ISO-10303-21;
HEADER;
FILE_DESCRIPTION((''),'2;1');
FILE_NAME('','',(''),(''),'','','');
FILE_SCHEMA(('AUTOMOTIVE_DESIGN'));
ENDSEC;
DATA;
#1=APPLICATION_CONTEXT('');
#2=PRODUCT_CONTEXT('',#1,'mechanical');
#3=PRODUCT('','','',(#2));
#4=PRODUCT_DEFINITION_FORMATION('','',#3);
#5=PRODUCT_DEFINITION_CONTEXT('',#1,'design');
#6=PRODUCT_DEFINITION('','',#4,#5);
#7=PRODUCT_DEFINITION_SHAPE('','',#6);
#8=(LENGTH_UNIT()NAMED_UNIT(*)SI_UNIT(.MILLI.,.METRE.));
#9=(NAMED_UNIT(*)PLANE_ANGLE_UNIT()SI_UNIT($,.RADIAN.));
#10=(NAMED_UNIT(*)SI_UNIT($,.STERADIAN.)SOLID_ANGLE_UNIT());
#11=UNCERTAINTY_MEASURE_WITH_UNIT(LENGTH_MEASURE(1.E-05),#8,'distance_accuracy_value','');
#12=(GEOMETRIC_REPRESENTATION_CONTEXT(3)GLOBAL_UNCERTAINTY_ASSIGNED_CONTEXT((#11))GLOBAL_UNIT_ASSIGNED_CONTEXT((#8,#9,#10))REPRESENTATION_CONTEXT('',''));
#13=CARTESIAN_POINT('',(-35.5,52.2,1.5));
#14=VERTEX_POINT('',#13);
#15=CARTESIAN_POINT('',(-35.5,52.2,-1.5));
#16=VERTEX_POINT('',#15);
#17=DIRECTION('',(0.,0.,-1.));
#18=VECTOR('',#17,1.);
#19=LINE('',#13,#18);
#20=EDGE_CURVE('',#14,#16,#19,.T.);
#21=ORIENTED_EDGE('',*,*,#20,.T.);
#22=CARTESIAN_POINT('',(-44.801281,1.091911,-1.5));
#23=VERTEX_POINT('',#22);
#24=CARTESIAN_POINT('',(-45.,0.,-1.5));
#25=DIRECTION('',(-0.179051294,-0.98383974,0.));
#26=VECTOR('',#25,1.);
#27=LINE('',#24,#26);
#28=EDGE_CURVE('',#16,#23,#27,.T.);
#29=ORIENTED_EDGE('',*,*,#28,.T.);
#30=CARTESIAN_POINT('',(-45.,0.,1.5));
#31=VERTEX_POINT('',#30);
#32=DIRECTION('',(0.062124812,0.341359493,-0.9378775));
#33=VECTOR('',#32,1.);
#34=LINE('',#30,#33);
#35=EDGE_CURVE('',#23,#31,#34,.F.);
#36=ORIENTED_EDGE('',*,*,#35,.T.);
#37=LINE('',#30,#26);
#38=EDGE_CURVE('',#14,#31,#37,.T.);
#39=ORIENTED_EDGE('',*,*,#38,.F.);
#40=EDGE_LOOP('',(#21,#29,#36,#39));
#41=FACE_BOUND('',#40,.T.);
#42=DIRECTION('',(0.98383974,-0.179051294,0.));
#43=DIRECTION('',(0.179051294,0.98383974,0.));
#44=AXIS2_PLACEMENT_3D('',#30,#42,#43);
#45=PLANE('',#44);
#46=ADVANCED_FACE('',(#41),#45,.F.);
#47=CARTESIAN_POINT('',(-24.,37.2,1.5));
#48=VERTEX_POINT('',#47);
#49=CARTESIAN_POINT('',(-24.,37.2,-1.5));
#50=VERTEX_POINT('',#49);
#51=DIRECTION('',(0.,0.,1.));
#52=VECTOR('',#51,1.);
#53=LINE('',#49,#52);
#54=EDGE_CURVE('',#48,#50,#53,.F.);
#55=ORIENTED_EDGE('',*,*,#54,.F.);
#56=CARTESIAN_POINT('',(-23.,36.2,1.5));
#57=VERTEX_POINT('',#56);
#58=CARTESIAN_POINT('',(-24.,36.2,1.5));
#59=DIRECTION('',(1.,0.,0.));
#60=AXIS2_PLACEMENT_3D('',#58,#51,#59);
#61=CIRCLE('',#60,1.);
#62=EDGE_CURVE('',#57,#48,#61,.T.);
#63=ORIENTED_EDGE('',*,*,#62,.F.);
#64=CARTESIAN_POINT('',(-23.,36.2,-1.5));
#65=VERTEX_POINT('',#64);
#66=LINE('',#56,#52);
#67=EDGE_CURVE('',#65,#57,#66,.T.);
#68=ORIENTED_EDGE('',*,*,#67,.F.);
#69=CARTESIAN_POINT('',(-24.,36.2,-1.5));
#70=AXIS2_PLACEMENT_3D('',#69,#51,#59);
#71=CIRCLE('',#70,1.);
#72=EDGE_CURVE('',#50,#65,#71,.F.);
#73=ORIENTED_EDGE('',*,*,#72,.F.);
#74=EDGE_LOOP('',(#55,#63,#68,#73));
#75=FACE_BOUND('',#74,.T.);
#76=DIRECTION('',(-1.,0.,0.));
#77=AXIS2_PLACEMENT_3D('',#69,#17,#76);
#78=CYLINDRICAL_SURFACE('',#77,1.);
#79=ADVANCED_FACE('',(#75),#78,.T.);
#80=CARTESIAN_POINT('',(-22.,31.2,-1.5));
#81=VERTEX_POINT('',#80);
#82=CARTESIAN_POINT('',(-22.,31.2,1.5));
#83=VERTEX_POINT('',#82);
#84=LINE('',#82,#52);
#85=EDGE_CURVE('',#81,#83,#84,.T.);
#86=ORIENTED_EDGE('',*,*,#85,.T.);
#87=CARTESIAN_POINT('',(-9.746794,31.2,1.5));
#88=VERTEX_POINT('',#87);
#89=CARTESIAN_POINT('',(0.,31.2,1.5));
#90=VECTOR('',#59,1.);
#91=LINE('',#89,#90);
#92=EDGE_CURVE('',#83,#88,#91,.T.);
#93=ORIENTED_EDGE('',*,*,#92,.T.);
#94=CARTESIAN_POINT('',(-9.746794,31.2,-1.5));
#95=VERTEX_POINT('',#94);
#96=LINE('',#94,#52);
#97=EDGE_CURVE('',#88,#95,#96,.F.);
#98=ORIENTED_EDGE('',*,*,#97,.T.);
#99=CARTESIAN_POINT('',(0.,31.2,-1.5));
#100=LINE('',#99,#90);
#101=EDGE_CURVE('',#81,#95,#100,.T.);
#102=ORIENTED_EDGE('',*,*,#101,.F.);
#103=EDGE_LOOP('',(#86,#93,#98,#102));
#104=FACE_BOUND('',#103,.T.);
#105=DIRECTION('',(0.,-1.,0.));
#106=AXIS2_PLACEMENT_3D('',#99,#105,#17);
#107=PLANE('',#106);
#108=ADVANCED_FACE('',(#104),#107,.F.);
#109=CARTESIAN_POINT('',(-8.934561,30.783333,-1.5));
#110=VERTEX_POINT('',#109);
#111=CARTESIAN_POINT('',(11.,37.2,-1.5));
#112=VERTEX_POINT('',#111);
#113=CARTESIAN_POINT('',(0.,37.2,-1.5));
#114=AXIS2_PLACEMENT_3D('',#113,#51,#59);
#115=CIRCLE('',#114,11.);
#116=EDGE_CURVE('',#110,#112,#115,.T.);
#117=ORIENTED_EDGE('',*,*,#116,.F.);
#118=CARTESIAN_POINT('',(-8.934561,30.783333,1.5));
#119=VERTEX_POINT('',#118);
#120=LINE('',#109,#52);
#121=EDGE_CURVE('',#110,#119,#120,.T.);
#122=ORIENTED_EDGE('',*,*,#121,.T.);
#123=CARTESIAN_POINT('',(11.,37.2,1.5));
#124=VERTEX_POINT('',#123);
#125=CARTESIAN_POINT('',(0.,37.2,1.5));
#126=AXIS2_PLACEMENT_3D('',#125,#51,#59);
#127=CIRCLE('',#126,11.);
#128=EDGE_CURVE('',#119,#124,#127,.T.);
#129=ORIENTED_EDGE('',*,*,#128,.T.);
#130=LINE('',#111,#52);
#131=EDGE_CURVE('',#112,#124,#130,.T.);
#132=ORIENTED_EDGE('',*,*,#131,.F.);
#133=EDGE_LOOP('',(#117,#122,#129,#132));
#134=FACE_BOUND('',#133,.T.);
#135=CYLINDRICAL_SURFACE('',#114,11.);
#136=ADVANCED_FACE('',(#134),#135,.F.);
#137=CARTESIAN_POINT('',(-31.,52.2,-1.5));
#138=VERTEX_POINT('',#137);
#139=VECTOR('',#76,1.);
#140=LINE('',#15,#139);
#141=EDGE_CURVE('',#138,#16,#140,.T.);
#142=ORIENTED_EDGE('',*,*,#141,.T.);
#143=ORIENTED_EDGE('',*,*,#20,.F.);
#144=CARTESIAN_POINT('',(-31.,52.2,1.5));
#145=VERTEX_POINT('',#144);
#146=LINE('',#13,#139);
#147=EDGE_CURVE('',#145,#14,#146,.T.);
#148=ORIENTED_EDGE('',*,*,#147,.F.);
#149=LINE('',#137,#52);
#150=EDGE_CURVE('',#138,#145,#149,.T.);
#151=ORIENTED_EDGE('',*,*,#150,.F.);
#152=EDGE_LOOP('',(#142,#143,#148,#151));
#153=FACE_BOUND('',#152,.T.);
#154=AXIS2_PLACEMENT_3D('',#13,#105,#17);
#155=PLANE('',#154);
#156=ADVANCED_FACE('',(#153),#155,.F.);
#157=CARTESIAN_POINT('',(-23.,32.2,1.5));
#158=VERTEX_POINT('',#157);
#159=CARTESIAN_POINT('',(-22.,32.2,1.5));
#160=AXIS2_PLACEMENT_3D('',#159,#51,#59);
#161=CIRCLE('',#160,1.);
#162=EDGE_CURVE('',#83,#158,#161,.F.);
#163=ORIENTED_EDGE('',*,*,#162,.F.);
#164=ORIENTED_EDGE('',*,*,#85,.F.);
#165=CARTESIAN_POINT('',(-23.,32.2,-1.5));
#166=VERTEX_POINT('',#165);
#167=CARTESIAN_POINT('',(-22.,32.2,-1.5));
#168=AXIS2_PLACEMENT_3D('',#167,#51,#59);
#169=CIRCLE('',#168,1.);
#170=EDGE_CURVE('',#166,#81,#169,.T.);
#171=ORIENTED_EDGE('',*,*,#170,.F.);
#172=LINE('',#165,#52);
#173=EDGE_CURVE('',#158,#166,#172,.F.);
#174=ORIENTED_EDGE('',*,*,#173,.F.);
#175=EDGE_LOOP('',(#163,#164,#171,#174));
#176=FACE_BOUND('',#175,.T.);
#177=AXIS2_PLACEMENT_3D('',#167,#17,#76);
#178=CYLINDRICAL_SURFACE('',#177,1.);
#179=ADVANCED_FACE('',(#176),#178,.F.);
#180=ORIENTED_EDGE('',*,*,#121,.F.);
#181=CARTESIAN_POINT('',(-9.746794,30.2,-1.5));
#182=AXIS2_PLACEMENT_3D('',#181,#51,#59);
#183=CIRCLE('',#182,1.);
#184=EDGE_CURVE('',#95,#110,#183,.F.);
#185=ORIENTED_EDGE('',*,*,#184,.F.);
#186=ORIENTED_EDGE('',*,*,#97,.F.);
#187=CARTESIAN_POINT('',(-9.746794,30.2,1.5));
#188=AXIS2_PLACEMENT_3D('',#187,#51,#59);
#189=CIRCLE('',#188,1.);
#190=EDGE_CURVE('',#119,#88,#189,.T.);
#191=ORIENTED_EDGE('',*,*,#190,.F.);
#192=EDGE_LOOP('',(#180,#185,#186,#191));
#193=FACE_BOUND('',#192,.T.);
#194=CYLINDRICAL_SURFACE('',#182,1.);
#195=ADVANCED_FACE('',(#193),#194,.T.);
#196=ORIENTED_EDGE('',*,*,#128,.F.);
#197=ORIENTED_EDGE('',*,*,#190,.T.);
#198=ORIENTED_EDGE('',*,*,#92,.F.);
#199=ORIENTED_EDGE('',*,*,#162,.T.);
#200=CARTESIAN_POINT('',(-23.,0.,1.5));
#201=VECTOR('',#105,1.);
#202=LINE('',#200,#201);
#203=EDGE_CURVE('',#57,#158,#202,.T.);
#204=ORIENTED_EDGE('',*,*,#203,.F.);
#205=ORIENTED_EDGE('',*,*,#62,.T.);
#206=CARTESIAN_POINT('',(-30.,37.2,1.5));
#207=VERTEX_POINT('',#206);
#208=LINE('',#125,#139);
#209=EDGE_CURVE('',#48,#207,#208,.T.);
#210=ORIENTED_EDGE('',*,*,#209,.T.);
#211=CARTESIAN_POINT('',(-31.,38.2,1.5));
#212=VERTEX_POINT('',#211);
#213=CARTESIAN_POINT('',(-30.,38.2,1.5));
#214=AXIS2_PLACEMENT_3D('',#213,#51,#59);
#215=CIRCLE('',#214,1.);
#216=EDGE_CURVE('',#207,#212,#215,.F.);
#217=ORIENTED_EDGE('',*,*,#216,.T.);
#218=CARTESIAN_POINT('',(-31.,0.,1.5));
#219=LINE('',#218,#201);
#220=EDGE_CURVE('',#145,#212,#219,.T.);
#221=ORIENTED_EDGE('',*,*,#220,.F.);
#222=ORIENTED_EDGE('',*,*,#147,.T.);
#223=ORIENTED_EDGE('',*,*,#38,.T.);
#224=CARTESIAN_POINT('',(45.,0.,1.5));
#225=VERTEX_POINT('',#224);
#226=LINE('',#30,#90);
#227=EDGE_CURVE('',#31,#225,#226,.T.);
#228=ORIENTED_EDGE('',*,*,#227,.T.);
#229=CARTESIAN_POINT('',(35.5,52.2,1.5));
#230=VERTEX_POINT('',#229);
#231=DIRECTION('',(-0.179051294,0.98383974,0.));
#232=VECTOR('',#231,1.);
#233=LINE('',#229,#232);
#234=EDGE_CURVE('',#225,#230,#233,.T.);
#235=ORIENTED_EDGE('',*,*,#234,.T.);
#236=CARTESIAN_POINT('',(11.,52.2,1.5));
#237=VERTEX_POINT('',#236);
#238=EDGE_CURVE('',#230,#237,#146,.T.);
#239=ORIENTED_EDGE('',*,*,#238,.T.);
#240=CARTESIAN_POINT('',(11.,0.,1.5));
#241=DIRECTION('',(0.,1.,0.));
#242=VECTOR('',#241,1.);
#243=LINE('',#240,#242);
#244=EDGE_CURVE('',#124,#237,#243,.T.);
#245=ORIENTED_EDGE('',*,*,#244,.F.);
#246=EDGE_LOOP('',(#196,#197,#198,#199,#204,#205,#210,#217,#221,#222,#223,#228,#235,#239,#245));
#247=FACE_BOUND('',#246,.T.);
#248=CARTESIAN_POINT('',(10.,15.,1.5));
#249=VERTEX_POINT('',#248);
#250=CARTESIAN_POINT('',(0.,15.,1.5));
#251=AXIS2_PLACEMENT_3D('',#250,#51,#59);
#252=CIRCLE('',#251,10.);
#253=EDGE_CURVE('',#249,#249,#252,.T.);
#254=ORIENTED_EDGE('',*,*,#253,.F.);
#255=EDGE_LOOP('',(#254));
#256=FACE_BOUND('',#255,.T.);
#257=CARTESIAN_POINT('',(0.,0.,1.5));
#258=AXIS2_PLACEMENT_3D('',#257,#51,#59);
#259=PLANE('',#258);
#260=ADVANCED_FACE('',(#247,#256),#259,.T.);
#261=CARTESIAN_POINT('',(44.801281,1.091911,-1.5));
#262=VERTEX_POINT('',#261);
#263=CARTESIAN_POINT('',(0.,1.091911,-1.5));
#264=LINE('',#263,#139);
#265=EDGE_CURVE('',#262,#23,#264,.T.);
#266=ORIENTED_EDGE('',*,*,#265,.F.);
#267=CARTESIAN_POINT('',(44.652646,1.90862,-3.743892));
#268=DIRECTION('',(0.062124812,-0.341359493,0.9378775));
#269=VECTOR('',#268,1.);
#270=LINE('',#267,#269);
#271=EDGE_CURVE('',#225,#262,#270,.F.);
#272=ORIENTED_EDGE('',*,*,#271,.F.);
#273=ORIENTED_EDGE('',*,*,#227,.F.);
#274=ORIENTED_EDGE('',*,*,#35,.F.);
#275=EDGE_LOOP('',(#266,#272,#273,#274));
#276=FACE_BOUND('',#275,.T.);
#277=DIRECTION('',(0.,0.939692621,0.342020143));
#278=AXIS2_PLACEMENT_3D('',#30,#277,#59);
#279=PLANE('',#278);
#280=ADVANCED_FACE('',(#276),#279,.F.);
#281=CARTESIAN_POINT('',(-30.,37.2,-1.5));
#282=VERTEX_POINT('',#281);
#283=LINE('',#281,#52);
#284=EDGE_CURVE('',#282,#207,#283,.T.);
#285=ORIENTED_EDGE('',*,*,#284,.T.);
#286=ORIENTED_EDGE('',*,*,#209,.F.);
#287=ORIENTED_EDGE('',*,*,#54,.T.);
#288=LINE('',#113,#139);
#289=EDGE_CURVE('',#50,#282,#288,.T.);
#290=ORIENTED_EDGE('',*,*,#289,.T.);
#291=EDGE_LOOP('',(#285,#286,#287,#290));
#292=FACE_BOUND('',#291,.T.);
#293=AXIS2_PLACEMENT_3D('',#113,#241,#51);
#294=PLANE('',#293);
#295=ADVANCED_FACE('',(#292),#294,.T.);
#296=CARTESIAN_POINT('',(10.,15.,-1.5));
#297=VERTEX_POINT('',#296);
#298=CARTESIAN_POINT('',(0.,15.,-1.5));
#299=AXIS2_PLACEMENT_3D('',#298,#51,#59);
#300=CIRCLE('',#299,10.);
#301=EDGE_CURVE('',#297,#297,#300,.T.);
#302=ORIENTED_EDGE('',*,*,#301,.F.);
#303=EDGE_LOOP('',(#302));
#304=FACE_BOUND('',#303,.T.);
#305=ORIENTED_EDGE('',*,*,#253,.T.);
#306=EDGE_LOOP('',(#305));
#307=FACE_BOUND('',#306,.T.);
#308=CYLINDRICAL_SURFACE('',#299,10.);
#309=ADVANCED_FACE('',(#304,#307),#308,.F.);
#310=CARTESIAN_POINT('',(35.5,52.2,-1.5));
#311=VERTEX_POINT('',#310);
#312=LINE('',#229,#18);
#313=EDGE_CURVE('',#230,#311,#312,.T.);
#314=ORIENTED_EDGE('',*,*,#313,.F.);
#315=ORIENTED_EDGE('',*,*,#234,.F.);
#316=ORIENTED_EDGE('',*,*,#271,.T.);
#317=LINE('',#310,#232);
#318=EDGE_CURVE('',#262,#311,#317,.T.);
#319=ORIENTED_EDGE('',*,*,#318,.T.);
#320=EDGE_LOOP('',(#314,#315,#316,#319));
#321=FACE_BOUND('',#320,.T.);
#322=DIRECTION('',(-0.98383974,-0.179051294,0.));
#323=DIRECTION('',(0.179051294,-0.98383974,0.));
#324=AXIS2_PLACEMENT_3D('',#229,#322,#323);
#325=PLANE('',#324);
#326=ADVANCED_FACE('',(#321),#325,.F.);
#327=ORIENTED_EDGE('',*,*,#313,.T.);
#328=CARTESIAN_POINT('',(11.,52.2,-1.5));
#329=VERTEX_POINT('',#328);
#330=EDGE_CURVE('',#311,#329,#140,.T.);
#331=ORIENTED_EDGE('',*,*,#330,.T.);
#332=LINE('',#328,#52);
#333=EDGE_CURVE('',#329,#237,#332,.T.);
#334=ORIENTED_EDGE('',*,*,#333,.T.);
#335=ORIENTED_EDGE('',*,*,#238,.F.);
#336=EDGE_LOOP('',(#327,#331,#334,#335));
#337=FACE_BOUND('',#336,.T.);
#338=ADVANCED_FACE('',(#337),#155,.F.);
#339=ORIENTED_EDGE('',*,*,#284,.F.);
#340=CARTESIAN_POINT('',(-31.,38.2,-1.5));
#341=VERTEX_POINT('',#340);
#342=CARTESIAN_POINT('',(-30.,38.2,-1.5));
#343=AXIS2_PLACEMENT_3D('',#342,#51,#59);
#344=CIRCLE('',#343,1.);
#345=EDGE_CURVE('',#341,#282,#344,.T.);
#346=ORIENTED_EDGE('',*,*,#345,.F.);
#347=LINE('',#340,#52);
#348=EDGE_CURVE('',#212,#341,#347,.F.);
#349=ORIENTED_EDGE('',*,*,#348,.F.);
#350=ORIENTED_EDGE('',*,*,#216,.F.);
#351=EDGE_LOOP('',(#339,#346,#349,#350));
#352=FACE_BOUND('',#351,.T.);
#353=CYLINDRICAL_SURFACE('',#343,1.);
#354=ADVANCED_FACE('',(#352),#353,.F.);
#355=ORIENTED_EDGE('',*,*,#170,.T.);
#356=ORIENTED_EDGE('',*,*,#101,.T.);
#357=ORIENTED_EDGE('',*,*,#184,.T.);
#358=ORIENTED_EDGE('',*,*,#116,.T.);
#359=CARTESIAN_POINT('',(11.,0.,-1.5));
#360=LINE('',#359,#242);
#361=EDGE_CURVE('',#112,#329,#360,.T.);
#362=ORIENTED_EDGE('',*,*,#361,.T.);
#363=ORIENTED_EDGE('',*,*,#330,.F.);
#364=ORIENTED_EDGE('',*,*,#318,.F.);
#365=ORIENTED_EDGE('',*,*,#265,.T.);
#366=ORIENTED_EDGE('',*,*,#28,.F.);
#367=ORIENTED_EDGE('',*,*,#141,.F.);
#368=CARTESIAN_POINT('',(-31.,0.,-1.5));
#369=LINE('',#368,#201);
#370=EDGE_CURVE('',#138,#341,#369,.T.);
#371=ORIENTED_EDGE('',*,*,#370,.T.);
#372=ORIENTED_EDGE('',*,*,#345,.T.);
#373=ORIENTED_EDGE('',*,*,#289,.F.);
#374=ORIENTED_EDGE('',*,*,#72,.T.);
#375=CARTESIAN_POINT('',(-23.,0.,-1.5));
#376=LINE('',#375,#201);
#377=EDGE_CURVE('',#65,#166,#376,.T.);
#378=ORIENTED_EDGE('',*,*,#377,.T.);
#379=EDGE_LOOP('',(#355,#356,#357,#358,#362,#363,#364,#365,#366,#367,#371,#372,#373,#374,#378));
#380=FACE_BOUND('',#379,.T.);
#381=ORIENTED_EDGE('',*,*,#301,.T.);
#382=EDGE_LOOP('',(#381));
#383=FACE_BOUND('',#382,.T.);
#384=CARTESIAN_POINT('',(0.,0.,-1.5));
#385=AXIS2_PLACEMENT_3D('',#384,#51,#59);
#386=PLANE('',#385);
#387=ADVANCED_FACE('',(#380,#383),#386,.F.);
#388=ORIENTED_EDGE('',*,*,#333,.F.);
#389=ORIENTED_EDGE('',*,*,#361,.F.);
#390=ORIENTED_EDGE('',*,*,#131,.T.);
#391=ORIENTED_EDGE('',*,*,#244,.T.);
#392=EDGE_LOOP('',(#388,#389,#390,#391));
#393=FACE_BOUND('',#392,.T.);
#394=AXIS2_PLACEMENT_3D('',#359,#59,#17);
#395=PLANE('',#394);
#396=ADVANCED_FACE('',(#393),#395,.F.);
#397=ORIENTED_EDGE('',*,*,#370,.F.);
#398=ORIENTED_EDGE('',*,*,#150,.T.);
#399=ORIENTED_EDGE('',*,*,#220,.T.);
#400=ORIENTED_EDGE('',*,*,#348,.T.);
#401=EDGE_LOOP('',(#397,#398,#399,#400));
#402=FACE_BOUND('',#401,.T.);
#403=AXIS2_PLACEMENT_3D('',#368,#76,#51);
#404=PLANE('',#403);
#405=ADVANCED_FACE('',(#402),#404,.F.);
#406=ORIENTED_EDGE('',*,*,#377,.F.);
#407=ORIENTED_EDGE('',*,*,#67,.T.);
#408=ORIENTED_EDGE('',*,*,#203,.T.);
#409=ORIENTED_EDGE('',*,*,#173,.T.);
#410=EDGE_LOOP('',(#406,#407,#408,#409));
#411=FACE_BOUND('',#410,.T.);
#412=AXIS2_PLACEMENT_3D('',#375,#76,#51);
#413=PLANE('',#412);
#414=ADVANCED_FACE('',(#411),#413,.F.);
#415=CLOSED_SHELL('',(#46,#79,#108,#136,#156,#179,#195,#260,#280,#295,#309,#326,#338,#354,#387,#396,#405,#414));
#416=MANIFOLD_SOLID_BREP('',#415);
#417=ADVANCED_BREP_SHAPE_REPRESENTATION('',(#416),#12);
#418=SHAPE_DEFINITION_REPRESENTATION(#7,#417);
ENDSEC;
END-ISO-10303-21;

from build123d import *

# Parameters (mm, degrees)
BOSS_EXTRUDE1_DEPTH = 1.5
CHAMFER1_SIZE2      = 1.091910703
CHAMFER1_SIZE       = 3
CUT_EXTRUDE1_DEPTH  = 69.98434605
FILLET1_R           = 1


with BuildPart() as part:
    # Sketch1 → Boss-Extrude1 (new, symmetric)
    with BuildSketch(Plane.XY):
        Polygon((-45, 0), (45, 0), (35.5, 52.2), (-35.5, 52.2), align=None)
    extrude(amount=BOSS_EXTRUDE1_DEPTH, both=True)

    # Chamfer1
    chamfer1_edges = [part.edges().sort_by_distance(p)[0] for p in [
        (0, 0, -1.5),
    ]]
    chamfer1_side = [part.faces().sort_by_distance(p)[0] for p in [
        (0, 0, -1.478161786),
    ]]
    chamfer(chamfer1_edges, length=CHAMFER1_SIZE - 0.0001, length2=CHAMFER1_SIZE2 - 0.0001, reference=chamfer1_side[0])  # a hair under: the kernel refuses the full size

    # Sketch2 → Cut-Extrude1 (cut, through all)
    with BuildSketch(Plane.XY.offset(1.5)):
        Polygon((-11, 37.2), (-11, 52.2), (-31, 52.2), (-31, 37.2), (-23, 37.2), align=None)
        with BuildLine():
            ThreePointArc((-9.219544457, 31.2), (-5.244044241, 27.530460197), (0, 26.2))
            Line((0, 26.2), (0, 52.2))
            Line((0, 52.2), (-11, 52.2))
            Line((-11, 52.2), (-11, 37.2))
            ThreePointArc((-11, 37.2), (-10.545496409, 34.070702078), (-9.219544457, 31.2))
        make_face()
        with BuildLine():
            Line((0, 52.2), (0, 26.2))
            ThreePointArc((0, 26.2), (7.778174593, 29.421825407), (11, 37.2))
            Line((11, 37.2), (11, 52.2))
            Line((11, 52.2), (0, 52.2))
        make_face()
        with BuildLine():
            ThreePointArc((0, 25), (-10, 15), (0, 5))
            Line((0, 5), (0, 25))
        make_face()
        with BuildLine():
            Line((0, 25), (0, 5))
            ThreePointArc((0, 5), (7.071067812, 7.928932188), (10, 15))
            ThreePointArc((10, 15), (7.071067812, 22.071067812), (0, 25))
        make_face()
        with BuildLine():
            Line((-23, 31.2), (-9.219544457, 31.2))
            ThreePointArc((-9.219544457, 31.2), (-10.545496409, 34.070702078), (-11, 37.2))
            Line((-11, 37.2), (-23, 37.2))
            Line((-23, 37.2), (-23, 31.2))
        make_face()
    extrude(amount=-CUT_EXTRUDE1_DEPTH, mode=Mode.SUBTRACT)

    # Fillet1
    fillet1_edges = [part.edges().sort_by_distance(p)[0] for p in [
        (-9.219544457, 31.2, 0),
        (-23, 31.2, 0),
        (-23, 37.2, 0),
        (-31, 37.2, 0),
    ]]
    fillet(fillet1_edges, radius=FILLET1_R)


solid = part.part
